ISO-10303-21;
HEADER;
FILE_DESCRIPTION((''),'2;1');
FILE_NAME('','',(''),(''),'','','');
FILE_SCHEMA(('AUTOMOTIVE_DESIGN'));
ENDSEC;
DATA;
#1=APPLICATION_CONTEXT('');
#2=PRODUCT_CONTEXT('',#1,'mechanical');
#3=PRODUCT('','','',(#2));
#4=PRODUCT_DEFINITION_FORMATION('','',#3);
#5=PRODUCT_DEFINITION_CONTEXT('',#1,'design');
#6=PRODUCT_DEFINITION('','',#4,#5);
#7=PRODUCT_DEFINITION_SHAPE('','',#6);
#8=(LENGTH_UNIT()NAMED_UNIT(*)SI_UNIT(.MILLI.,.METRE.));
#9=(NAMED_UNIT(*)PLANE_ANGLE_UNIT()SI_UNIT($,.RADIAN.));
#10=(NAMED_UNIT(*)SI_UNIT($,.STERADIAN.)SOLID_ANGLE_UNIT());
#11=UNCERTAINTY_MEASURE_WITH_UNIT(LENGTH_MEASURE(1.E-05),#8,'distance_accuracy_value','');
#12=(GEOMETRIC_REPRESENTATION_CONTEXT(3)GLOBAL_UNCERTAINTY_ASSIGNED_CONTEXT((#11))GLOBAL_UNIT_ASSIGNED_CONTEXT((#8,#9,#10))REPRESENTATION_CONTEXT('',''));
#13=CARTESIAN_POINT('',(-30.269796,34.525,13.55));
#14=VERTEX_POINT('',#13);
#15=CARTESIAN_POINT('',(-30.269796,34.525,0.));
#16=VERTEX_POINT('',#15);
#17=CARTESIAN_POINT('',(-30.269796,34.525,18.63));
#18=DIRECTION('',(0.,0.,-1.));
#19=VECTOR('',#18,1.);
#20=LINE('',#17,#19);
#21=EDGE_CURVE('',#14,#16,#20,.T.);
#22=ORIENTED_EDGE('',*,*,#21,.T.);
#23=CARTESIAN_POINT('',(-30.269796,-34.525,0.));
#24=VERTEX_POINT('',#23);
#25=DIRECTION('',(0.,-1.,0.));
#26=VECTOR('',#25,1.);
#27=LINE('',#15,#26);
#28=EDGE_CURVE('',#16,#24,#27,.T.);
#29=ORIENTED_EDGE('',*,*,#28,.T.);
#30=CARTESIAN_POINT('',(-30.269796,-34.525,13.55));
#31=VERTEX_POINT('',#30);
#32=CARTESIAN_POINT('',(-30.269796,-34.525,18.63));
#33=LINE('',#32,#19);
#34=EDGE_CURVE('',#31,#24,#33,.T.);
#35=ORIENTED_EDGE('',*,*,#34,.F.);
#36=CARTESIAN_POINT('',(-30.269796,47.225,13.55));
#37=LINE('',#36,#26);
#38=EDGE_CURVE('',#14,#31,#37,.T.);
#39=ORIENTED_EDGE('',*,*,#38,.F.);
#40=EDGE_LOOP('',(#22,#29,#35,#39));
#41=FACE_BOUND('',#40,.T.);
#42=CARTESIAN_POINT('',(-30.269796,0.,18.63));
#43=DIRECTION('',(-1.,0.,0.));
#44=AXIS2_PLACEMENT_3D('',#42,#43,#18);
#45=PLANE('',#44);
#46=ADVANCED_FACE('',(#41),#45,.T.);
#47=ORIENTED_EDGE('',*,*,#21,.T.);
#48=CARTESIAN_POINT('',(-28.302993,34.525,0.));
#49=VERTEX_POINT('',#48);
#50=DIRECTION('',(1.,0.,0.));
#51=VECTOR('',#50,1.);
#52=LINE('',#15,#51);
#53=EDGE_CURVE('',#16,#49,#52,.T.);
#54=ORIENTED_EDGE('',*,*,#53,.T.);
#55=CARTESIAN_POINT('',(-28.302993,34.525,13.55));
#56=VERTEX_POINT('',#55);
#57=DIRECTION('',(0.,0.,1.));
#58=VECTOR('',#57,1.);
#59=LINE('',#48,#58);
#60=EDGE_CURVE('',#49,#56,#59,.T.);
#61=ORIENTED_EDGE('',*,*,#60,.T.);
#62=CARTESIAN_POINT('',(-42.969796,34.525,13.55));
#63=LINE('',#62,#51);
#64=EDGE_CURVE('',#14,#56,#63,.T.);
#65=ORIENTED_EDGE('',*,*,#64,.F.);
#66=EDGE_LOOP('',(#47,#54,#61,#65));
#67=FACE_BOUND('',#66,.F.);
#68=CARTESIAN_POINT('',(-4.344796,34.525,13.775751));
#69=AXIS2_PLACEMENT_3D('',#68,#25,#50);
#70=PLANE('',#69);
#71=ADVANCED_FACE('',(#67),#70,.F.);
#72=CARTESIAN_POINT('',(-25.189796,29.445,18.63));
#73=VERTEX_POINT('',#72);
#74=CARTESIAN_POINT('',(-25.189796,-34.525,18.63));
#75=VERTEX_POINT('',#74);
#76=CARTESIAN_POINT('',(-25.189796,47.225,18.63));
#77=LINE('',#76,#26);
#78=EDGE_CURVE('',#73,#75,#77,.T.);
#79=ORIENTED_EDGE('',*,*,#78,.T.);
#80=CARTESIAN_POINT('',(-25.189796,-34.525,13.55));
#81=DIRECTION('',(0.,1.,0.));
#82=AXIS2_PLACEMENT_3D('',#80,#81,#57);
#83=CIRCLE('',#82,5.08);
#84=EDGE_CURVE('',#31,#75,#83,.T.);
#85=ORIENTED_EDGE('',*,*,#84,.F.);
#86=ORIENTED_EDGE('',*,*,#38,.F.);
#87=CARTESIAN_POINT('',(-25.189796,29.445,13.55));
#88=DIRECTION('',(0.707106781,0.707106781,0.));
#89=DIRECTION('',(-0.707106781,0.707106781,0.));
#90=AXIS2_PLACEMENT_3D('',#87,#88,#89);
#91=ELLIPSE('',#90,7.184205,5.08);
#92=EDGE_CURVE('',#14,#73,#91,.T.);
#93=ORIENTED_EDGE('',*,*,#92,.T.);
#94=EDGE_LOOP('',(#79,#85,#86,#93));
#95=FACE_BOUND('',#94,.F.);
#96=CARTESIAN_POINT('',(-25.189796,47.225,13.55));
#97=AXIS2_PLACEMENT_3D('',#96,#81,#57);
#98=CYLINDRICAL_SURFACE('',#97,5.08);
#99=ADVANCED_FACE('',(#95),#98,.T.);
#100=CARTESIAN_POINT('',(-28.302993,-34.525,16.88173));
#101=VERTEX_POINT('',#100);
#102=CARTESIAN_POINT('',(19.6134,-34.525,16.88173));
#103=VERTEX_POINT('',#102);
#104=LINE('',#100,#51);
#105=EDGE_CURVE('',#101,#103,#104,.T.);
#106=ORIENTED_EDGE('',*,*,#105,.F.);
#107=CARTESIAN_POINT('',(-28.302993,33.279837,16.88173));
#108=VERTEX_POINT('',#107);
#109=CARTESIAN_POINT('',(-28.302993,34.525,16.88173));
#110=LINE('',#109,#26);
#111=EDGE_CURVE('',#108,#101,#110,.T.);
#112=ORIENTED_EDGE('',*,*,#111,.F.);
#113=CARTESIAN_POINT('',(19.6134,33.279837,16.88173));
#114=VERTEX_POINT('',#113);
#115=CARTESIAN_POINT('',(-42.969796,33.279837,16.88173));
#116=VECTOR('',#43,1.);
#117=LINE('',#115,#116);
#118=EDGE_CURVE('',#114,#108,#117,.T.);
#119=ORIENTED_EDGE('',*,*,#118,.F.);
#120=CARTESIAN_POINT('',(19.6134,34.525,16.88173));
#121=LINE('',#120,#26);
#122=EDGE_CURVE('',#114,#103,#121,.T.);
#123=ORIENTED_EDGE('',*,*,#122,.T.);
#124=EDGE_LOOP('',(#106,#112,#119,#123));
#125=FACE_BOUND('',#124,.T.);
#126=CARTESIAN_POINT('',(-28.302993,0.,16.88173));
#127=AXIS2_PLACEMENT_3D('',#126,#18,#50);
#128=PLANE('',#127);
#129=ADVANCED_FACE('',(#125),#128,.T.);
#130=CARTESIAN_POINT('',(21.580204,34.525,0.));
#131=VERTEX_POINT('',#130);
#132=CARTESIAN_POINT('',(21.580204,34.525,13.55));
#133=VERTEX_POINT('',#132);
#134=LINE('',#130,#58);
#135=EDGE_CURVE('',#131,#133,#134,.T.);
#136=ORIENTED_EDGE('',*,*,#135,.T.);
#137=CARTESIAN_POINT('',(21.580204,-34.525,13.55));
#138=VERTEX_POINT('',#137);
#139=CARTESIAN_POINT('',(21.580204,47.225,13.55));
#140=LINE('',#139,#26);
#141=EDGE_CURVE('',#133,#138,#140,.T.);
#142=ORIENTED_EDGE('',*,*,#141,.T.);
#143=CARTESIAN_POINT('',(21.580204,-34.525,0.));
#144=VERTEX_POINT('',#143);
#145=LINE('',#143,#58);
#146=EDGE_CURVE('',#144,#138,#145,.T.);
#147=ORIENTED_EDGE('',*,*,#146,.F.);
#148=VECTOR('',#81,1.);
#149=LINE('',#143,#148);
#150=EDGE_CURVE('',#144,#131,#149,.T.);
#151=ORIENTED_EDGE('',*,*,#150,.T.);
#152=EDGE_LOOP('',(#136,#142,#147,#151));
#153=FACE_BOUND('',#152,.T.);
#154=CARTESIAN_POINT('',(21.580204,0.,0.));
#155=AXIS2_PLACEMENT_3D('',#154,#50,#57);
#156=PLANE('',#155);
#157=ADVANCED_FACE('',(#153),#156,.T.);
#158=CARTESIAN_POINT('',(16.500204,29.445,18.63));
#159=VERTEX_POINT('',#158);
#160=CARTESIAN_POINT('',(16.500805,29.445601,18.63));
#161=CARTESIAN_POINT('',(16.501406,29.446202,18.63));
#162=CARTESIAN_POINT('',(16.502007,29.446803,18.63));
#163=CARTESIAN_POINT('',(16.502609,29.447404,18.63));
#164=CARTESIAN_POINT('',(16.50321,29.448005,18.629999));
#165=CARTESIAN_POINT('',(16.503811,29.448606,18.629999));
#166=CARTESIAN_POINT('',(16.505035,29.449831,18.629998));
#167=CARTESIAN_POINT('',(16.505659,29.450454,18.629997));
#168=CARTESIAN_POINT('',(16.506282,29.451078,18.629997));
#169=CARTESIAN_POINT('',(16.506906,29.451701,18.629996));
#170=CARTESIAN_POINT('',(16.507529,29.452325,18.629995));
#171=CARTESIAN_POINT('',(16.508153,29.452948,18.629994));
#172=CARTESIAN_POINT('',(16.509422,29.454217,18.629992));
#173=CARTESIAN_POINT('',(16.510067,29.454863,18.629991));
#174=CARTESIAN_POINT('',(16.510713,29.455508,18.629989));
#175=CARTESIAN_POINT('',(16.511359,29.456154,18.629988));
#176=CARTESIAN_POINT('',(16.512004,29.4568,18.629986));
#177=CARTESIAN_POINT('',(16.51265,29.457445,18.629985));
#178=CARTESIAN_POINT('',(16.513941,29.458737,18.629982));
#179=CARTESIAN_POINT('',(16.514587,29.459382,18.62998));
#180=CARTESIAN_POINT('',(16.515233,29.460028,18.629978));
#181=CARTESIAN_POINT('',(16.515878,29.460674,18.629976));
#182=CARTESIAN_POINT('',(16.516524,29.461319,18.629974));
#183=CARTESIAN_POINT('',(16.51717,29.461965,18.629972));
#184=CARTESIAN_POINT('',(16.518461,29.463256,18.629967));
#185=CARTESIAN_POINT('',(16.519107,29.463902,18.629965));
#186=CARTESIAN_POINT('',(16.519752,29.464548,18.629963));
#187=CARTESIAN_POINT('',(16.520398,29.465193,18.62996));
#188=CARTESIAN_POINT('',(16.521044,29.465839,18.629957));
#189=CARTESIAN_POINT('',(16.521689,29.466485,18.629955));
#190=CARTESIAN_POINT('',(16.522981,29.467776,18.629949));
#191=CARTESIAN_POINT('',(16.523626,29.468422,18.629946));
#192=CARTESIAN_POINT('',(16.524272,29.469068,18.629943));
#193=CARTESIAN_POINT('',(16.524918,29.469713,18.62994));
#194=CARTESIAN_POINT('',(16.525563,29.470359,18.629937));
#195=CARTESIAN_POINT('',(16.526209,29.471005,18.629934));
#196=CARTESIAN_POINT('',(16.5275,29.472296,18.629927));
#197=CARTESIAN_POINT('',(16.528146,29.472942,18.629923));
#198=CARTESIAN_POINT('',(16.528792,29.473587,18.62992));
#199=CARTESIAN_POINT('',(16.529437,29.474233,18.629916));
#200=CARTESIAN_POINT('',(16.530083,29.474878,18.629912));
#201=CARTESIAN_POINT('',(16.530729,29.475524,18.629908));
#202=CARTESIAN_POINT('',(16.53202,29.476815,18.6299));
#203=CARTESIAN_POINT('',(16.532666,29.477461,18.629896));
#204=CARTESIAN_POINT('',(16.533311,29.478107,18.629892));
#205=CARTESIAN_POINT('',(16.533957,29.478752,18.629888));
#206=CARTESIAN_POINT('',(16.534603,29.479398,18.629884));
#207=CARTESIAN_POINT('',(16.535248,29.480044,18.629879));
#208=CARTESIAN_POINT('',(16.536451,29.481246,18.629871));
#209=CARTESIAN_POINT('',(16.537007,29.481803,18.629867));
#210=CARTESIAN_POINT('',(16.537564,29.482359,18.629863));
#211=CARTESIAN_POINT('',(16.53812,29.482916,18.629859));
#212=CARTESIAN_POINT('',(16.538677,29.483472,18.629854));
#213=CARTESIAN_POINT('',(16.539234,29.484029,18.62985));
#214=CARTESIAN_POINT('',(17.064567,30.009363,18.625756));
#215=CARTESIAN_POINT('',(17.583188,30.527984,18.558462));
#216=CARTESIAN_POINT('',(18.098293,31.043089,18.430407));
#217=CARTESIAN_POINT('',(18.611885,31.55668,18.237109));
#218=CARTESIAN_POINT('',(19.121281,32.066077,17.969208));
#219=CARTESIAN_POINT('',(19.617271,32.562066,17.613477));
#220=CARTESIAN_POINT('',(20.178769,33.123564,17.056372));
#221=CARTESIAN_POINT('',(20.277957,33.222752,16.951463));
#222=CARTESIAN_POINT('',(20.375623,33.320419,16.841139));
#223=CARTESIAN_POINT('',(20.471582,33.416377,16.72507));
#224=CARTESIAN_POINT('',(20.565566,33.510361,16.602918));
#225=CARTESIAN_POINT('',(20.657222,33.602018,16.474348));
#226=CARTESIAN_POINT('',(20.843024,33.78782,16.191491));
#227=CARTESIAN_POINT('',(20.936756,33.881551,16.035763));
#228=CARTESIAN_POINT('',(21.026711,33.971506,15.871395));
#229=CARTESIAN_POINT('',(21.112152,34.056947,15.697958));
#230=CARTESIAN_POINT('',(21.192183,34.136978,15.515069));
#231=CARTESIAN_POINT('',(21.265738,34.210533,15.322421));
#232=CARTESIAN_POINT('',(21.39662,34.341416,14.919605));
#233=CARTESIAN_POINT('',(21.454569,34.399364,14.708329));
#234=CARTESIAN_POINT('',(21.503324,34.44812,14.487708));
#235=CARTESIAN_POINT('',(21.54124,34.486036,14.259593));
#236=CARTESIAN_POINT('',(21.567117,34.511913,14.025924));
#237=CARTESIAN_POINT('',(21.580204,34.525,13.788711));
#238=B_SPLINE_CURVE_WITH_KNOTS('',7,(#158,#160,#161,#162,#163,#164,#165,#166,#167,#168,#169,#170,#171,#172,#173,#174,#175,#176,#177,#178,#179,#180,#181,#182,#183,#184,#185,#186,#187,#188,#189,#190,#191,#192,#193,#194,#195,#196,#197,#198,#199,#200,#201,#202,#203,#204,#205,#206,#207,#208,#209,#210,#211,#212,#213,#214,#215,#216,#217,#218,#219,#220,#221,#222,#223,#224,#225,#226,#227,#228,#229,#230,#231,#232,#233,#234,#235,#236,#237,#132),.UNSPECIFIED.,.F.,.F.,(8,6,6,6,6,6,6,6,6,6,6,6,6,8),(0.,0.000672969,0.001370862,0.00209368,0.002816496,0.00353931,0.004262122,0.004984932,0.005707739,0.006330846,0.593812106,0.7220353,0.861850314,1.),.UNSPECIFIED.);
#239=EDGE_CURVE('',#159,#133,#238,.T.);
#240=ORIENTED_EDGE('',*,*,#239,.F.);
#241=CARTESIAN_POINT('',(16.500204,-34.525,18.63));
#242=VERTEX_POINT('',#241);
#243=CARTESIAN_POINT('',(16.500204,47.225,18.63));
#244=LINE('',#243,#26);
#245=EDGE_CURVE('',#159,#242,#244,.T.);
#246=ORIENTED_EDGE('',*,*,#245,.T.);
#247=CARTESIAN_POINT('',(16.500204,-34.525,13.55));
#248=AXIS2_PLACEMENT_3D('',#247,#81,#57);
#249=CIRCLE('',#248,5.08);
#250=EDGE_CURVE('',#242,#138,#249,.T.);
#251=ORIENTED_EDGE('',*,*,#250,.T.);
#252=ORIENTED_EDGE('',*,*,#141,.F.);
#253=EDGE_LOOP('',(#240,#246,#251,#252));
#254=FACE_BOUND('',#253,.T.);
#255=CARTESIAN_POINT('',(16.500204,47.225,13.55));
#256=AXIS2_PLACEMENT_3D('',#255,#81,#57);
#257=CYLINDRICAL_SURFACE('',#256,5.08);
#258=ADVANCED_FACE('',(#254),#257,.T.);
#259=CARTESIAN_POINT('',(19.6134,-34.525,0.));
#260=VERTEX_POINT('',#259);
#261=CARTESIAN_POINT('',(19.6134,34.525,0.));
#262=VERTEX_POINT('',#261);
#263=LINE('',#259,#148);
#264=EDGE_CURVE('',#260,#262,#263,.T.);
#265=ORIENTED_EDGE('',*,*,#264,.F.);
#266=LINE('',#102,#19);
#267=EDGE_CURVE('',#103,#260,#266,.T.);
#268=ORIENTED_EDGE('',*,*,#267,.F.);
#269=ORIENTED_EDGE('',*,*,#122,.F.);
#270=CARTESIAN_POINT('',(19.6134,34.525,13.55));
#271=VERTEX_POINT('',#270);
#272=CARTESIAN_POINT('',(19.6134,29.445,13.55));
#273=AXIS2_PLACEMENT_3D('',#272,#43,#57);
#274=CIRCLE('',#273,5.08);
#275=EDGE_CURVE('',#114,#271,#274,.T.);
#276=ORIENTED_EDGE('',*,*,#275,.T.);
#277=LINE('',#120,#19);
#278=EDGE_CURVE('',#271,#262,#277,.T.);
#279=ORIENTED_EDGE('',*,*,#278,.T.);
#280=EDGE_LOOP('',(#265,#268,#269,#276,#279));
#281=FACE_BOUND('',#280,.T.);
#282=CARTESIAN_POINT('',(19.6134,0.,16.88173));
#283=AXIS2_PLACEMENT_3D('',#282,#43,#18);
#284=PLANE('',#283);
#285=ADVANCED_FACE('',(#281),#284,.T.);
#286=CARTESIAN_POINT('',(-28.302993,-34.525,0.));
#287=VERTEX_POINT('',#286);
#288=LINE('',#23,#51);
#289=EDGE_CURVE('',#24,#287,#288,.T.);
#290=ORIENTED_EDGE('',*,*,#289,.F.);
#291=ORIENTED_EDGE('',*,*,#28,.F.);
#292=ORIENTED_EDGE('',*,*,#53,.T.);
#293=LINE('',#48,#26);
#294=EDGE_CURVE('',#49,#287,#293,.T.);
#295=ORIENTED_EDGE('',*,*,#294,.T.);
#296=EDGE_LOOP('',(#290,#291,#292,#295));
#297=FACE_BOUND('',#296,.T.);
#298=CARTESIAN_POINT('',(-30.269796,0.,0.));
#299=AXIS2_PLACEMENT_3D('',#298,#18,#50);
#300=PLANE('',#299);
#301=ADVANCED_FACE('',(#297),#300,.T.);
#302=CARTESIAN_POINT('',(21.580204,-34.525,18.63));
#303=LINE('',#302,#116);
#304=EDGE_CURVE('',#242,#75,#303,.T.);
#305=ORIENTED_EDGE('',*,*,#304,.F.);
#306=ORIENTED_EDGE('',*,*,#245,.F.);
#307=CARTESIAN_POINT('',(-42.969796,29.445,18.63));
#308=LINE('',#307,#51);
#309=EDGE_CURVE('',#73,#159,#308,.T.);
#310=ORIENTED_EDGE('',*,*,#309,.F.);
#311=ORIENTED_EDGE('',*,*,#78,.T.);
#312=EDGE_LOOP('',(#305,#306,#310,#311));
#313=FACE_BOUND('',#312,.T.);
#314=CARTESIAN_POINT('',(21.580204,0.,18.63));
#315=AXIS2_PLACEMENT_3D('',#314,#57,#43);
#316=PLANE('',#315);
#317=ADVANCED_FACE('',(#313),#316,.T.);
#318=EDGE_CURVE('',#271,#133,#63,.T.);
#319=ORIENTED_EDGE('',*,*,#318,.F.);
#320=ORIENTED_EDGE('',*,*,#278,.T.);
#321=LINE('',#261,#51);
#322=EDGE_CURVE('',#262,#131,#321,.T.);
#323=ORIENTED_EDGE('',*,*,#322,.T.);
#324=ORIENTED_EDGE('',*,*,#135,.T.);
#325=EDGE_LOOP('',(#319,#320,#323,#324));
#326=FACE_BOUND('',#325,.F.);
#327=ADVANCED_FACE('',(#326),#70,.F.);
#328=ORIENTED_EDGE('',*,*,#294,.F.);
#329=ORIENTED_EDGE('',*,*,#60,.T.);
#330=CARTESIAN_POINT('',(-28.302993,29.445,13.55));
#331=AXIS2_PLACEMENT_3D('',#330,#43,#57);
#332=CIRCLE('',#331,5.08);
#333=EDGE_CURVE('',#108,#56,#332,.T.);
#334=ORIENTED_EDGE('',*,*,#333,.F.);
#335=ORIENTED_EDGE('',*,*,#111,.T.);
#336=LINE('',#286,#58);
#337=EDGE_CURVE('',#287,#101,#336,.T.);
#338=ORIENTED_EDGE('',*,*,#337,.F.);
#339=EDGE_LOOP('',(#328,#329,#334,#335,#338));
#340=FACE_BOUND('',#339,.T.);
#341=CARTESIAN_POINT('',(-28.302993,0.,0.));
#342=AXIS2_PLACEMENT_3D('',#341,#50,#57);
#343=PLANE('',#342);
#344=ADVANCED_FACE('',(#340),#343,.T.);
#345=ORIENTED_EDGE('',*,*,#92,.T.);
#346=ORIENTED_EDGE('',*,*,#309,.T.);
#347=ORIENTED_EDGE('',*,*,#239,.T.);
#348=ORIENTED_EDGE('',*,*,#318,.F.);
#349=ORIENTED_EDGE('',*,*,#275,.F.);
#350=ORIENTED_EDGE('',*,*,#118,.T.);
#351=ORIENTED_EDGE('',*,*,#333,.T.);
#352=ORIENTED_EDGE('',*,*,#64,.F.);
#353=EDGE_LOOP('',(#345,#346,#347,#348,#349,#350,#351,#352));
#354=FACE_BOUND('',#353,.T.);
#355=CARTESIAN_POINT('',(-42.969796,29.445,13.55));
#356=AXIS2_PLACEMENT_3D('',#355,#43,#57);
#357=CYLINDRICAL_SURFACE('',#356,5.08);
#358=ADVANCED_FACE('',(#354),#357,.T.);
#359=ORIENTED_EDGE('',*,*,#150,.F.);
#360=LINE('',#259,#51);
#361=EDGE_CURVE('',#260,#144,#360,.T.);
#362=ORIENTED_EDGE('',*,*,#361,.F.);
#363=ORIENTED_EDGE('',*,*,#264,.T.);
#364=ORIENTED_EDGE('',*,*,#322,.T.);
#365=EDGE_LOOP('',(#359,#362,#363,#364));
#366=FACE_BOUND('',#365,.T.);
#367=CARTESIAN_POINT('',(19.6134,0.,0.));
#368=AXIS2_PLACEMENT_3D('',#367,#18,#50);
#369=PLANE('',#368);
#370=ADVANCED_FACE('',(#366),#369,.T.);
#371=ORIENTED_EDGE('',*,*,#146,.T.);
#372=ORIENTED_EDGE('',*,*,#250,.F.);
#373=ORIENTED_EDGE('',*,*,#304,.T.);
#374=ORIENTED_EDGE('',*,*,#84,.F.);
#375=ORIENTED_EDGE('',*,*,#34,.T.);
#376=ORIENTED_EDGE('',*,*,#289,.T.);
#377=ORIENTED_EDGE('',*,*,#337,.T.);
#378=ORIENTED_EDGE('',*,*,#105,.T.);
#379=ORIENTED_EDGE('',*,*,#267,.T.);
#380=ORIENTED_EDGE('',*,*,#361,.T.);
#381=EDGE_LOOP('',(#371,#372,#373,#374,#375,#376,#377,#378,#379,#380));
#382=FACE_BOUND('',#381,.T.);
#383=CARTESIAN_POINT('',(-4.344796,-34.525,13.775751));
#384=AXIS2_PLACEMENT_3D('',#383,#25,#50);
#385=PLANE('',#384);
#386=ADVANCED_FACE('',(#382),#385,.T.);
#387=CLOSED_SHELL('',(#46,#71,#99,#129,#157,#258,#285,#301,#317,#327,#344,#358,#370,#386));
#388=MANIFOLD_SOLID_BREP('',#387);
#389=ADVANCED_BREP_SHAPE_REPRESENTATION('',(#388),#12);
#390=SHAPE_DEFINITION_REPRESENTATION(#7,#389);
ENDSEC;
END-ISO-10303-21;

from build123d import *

# Parameters (mm, degrees)
F1_DEPTH    = 34.52499953
F2_T1_DEPTH = 94.44999906
F2_T3_DEPTH = 77.25000044


# Not quite as in the source:
# - a fillet or chamfer that OpenCascade refuses, or shapes differently, is made with other operations: its cross-section is extruded or revolved along the edge and cut away or added


with BuildPart() as f1:
    # F0 (on Front) → F1 (new body, symmetric)
    with BuildSketch(Plane.XZ):
        Polygon((21.5802040493, 18.630000078), (-30.2697963907, 18.630000078), (-30.2697963907, 0), (-28.3029927087, 0), (-28.3029927087, 16.8817297936), (19.6134003673, 16.8817297936), (19.6134003673, 0), (21.5802040493, 0), align=None)
    extrude(amount=F1_DEPTH, both=True)

    # F2: fillet of radius 5.08 on 3 edges, made by hand

    # F2_s2 → F2_t1 (cut)
    with BuildSketch(Plane.XZ.offset(-47.22499953)):
        with BuildLine():
            ThreePointArc((-25.1897963907, 18.630000078), (-28.7818988391, 17.1421025264), (-30.2697963907, 13.550000078))
            Line((-30.2697963907, 13.550000078), (-30.2697963907, 18.630000078))
            Line((-30.2697963907, 18.630000078), (-25.1897963907, 18.630000078))
        make_face()
        with BuildLine():
            ThreePointArc((16.5002040493, 18.630000078), (20.0923064978, 17.1421025264), (21.5802040493, 13.550000078))
            Line((21.5802040493, 13.550000078), (21.5802040493, 18.630000078))
            Line((21.5802040493, 18.630000078), (16.5002040493, 18.630000078))
        make_face()
    extrude(amount=F2_T1_DEPTH, mode=Mode.SUBTRACT)

    # F2_s4 → F2_t3 (cut)
    with BuildSketch(Plane.YZ.offset(-42.9697963907)):
        with BuildLine():
            ThreePointArc((29.44499953, 18.630000078), (33.0371019784, 17.1421025264), (34.52499953, 13.550000078))
            Line((34.52499953, 13.550000078), (34.52499953, 18.630000078))
            Line((34.52499953, 18.630000078), (29.44499953, 18.630000078))
        make_face()
    extrude(amount=F2_T3_DEPTH, mode=Mode.SUBTRACT)


solid = f1.part
